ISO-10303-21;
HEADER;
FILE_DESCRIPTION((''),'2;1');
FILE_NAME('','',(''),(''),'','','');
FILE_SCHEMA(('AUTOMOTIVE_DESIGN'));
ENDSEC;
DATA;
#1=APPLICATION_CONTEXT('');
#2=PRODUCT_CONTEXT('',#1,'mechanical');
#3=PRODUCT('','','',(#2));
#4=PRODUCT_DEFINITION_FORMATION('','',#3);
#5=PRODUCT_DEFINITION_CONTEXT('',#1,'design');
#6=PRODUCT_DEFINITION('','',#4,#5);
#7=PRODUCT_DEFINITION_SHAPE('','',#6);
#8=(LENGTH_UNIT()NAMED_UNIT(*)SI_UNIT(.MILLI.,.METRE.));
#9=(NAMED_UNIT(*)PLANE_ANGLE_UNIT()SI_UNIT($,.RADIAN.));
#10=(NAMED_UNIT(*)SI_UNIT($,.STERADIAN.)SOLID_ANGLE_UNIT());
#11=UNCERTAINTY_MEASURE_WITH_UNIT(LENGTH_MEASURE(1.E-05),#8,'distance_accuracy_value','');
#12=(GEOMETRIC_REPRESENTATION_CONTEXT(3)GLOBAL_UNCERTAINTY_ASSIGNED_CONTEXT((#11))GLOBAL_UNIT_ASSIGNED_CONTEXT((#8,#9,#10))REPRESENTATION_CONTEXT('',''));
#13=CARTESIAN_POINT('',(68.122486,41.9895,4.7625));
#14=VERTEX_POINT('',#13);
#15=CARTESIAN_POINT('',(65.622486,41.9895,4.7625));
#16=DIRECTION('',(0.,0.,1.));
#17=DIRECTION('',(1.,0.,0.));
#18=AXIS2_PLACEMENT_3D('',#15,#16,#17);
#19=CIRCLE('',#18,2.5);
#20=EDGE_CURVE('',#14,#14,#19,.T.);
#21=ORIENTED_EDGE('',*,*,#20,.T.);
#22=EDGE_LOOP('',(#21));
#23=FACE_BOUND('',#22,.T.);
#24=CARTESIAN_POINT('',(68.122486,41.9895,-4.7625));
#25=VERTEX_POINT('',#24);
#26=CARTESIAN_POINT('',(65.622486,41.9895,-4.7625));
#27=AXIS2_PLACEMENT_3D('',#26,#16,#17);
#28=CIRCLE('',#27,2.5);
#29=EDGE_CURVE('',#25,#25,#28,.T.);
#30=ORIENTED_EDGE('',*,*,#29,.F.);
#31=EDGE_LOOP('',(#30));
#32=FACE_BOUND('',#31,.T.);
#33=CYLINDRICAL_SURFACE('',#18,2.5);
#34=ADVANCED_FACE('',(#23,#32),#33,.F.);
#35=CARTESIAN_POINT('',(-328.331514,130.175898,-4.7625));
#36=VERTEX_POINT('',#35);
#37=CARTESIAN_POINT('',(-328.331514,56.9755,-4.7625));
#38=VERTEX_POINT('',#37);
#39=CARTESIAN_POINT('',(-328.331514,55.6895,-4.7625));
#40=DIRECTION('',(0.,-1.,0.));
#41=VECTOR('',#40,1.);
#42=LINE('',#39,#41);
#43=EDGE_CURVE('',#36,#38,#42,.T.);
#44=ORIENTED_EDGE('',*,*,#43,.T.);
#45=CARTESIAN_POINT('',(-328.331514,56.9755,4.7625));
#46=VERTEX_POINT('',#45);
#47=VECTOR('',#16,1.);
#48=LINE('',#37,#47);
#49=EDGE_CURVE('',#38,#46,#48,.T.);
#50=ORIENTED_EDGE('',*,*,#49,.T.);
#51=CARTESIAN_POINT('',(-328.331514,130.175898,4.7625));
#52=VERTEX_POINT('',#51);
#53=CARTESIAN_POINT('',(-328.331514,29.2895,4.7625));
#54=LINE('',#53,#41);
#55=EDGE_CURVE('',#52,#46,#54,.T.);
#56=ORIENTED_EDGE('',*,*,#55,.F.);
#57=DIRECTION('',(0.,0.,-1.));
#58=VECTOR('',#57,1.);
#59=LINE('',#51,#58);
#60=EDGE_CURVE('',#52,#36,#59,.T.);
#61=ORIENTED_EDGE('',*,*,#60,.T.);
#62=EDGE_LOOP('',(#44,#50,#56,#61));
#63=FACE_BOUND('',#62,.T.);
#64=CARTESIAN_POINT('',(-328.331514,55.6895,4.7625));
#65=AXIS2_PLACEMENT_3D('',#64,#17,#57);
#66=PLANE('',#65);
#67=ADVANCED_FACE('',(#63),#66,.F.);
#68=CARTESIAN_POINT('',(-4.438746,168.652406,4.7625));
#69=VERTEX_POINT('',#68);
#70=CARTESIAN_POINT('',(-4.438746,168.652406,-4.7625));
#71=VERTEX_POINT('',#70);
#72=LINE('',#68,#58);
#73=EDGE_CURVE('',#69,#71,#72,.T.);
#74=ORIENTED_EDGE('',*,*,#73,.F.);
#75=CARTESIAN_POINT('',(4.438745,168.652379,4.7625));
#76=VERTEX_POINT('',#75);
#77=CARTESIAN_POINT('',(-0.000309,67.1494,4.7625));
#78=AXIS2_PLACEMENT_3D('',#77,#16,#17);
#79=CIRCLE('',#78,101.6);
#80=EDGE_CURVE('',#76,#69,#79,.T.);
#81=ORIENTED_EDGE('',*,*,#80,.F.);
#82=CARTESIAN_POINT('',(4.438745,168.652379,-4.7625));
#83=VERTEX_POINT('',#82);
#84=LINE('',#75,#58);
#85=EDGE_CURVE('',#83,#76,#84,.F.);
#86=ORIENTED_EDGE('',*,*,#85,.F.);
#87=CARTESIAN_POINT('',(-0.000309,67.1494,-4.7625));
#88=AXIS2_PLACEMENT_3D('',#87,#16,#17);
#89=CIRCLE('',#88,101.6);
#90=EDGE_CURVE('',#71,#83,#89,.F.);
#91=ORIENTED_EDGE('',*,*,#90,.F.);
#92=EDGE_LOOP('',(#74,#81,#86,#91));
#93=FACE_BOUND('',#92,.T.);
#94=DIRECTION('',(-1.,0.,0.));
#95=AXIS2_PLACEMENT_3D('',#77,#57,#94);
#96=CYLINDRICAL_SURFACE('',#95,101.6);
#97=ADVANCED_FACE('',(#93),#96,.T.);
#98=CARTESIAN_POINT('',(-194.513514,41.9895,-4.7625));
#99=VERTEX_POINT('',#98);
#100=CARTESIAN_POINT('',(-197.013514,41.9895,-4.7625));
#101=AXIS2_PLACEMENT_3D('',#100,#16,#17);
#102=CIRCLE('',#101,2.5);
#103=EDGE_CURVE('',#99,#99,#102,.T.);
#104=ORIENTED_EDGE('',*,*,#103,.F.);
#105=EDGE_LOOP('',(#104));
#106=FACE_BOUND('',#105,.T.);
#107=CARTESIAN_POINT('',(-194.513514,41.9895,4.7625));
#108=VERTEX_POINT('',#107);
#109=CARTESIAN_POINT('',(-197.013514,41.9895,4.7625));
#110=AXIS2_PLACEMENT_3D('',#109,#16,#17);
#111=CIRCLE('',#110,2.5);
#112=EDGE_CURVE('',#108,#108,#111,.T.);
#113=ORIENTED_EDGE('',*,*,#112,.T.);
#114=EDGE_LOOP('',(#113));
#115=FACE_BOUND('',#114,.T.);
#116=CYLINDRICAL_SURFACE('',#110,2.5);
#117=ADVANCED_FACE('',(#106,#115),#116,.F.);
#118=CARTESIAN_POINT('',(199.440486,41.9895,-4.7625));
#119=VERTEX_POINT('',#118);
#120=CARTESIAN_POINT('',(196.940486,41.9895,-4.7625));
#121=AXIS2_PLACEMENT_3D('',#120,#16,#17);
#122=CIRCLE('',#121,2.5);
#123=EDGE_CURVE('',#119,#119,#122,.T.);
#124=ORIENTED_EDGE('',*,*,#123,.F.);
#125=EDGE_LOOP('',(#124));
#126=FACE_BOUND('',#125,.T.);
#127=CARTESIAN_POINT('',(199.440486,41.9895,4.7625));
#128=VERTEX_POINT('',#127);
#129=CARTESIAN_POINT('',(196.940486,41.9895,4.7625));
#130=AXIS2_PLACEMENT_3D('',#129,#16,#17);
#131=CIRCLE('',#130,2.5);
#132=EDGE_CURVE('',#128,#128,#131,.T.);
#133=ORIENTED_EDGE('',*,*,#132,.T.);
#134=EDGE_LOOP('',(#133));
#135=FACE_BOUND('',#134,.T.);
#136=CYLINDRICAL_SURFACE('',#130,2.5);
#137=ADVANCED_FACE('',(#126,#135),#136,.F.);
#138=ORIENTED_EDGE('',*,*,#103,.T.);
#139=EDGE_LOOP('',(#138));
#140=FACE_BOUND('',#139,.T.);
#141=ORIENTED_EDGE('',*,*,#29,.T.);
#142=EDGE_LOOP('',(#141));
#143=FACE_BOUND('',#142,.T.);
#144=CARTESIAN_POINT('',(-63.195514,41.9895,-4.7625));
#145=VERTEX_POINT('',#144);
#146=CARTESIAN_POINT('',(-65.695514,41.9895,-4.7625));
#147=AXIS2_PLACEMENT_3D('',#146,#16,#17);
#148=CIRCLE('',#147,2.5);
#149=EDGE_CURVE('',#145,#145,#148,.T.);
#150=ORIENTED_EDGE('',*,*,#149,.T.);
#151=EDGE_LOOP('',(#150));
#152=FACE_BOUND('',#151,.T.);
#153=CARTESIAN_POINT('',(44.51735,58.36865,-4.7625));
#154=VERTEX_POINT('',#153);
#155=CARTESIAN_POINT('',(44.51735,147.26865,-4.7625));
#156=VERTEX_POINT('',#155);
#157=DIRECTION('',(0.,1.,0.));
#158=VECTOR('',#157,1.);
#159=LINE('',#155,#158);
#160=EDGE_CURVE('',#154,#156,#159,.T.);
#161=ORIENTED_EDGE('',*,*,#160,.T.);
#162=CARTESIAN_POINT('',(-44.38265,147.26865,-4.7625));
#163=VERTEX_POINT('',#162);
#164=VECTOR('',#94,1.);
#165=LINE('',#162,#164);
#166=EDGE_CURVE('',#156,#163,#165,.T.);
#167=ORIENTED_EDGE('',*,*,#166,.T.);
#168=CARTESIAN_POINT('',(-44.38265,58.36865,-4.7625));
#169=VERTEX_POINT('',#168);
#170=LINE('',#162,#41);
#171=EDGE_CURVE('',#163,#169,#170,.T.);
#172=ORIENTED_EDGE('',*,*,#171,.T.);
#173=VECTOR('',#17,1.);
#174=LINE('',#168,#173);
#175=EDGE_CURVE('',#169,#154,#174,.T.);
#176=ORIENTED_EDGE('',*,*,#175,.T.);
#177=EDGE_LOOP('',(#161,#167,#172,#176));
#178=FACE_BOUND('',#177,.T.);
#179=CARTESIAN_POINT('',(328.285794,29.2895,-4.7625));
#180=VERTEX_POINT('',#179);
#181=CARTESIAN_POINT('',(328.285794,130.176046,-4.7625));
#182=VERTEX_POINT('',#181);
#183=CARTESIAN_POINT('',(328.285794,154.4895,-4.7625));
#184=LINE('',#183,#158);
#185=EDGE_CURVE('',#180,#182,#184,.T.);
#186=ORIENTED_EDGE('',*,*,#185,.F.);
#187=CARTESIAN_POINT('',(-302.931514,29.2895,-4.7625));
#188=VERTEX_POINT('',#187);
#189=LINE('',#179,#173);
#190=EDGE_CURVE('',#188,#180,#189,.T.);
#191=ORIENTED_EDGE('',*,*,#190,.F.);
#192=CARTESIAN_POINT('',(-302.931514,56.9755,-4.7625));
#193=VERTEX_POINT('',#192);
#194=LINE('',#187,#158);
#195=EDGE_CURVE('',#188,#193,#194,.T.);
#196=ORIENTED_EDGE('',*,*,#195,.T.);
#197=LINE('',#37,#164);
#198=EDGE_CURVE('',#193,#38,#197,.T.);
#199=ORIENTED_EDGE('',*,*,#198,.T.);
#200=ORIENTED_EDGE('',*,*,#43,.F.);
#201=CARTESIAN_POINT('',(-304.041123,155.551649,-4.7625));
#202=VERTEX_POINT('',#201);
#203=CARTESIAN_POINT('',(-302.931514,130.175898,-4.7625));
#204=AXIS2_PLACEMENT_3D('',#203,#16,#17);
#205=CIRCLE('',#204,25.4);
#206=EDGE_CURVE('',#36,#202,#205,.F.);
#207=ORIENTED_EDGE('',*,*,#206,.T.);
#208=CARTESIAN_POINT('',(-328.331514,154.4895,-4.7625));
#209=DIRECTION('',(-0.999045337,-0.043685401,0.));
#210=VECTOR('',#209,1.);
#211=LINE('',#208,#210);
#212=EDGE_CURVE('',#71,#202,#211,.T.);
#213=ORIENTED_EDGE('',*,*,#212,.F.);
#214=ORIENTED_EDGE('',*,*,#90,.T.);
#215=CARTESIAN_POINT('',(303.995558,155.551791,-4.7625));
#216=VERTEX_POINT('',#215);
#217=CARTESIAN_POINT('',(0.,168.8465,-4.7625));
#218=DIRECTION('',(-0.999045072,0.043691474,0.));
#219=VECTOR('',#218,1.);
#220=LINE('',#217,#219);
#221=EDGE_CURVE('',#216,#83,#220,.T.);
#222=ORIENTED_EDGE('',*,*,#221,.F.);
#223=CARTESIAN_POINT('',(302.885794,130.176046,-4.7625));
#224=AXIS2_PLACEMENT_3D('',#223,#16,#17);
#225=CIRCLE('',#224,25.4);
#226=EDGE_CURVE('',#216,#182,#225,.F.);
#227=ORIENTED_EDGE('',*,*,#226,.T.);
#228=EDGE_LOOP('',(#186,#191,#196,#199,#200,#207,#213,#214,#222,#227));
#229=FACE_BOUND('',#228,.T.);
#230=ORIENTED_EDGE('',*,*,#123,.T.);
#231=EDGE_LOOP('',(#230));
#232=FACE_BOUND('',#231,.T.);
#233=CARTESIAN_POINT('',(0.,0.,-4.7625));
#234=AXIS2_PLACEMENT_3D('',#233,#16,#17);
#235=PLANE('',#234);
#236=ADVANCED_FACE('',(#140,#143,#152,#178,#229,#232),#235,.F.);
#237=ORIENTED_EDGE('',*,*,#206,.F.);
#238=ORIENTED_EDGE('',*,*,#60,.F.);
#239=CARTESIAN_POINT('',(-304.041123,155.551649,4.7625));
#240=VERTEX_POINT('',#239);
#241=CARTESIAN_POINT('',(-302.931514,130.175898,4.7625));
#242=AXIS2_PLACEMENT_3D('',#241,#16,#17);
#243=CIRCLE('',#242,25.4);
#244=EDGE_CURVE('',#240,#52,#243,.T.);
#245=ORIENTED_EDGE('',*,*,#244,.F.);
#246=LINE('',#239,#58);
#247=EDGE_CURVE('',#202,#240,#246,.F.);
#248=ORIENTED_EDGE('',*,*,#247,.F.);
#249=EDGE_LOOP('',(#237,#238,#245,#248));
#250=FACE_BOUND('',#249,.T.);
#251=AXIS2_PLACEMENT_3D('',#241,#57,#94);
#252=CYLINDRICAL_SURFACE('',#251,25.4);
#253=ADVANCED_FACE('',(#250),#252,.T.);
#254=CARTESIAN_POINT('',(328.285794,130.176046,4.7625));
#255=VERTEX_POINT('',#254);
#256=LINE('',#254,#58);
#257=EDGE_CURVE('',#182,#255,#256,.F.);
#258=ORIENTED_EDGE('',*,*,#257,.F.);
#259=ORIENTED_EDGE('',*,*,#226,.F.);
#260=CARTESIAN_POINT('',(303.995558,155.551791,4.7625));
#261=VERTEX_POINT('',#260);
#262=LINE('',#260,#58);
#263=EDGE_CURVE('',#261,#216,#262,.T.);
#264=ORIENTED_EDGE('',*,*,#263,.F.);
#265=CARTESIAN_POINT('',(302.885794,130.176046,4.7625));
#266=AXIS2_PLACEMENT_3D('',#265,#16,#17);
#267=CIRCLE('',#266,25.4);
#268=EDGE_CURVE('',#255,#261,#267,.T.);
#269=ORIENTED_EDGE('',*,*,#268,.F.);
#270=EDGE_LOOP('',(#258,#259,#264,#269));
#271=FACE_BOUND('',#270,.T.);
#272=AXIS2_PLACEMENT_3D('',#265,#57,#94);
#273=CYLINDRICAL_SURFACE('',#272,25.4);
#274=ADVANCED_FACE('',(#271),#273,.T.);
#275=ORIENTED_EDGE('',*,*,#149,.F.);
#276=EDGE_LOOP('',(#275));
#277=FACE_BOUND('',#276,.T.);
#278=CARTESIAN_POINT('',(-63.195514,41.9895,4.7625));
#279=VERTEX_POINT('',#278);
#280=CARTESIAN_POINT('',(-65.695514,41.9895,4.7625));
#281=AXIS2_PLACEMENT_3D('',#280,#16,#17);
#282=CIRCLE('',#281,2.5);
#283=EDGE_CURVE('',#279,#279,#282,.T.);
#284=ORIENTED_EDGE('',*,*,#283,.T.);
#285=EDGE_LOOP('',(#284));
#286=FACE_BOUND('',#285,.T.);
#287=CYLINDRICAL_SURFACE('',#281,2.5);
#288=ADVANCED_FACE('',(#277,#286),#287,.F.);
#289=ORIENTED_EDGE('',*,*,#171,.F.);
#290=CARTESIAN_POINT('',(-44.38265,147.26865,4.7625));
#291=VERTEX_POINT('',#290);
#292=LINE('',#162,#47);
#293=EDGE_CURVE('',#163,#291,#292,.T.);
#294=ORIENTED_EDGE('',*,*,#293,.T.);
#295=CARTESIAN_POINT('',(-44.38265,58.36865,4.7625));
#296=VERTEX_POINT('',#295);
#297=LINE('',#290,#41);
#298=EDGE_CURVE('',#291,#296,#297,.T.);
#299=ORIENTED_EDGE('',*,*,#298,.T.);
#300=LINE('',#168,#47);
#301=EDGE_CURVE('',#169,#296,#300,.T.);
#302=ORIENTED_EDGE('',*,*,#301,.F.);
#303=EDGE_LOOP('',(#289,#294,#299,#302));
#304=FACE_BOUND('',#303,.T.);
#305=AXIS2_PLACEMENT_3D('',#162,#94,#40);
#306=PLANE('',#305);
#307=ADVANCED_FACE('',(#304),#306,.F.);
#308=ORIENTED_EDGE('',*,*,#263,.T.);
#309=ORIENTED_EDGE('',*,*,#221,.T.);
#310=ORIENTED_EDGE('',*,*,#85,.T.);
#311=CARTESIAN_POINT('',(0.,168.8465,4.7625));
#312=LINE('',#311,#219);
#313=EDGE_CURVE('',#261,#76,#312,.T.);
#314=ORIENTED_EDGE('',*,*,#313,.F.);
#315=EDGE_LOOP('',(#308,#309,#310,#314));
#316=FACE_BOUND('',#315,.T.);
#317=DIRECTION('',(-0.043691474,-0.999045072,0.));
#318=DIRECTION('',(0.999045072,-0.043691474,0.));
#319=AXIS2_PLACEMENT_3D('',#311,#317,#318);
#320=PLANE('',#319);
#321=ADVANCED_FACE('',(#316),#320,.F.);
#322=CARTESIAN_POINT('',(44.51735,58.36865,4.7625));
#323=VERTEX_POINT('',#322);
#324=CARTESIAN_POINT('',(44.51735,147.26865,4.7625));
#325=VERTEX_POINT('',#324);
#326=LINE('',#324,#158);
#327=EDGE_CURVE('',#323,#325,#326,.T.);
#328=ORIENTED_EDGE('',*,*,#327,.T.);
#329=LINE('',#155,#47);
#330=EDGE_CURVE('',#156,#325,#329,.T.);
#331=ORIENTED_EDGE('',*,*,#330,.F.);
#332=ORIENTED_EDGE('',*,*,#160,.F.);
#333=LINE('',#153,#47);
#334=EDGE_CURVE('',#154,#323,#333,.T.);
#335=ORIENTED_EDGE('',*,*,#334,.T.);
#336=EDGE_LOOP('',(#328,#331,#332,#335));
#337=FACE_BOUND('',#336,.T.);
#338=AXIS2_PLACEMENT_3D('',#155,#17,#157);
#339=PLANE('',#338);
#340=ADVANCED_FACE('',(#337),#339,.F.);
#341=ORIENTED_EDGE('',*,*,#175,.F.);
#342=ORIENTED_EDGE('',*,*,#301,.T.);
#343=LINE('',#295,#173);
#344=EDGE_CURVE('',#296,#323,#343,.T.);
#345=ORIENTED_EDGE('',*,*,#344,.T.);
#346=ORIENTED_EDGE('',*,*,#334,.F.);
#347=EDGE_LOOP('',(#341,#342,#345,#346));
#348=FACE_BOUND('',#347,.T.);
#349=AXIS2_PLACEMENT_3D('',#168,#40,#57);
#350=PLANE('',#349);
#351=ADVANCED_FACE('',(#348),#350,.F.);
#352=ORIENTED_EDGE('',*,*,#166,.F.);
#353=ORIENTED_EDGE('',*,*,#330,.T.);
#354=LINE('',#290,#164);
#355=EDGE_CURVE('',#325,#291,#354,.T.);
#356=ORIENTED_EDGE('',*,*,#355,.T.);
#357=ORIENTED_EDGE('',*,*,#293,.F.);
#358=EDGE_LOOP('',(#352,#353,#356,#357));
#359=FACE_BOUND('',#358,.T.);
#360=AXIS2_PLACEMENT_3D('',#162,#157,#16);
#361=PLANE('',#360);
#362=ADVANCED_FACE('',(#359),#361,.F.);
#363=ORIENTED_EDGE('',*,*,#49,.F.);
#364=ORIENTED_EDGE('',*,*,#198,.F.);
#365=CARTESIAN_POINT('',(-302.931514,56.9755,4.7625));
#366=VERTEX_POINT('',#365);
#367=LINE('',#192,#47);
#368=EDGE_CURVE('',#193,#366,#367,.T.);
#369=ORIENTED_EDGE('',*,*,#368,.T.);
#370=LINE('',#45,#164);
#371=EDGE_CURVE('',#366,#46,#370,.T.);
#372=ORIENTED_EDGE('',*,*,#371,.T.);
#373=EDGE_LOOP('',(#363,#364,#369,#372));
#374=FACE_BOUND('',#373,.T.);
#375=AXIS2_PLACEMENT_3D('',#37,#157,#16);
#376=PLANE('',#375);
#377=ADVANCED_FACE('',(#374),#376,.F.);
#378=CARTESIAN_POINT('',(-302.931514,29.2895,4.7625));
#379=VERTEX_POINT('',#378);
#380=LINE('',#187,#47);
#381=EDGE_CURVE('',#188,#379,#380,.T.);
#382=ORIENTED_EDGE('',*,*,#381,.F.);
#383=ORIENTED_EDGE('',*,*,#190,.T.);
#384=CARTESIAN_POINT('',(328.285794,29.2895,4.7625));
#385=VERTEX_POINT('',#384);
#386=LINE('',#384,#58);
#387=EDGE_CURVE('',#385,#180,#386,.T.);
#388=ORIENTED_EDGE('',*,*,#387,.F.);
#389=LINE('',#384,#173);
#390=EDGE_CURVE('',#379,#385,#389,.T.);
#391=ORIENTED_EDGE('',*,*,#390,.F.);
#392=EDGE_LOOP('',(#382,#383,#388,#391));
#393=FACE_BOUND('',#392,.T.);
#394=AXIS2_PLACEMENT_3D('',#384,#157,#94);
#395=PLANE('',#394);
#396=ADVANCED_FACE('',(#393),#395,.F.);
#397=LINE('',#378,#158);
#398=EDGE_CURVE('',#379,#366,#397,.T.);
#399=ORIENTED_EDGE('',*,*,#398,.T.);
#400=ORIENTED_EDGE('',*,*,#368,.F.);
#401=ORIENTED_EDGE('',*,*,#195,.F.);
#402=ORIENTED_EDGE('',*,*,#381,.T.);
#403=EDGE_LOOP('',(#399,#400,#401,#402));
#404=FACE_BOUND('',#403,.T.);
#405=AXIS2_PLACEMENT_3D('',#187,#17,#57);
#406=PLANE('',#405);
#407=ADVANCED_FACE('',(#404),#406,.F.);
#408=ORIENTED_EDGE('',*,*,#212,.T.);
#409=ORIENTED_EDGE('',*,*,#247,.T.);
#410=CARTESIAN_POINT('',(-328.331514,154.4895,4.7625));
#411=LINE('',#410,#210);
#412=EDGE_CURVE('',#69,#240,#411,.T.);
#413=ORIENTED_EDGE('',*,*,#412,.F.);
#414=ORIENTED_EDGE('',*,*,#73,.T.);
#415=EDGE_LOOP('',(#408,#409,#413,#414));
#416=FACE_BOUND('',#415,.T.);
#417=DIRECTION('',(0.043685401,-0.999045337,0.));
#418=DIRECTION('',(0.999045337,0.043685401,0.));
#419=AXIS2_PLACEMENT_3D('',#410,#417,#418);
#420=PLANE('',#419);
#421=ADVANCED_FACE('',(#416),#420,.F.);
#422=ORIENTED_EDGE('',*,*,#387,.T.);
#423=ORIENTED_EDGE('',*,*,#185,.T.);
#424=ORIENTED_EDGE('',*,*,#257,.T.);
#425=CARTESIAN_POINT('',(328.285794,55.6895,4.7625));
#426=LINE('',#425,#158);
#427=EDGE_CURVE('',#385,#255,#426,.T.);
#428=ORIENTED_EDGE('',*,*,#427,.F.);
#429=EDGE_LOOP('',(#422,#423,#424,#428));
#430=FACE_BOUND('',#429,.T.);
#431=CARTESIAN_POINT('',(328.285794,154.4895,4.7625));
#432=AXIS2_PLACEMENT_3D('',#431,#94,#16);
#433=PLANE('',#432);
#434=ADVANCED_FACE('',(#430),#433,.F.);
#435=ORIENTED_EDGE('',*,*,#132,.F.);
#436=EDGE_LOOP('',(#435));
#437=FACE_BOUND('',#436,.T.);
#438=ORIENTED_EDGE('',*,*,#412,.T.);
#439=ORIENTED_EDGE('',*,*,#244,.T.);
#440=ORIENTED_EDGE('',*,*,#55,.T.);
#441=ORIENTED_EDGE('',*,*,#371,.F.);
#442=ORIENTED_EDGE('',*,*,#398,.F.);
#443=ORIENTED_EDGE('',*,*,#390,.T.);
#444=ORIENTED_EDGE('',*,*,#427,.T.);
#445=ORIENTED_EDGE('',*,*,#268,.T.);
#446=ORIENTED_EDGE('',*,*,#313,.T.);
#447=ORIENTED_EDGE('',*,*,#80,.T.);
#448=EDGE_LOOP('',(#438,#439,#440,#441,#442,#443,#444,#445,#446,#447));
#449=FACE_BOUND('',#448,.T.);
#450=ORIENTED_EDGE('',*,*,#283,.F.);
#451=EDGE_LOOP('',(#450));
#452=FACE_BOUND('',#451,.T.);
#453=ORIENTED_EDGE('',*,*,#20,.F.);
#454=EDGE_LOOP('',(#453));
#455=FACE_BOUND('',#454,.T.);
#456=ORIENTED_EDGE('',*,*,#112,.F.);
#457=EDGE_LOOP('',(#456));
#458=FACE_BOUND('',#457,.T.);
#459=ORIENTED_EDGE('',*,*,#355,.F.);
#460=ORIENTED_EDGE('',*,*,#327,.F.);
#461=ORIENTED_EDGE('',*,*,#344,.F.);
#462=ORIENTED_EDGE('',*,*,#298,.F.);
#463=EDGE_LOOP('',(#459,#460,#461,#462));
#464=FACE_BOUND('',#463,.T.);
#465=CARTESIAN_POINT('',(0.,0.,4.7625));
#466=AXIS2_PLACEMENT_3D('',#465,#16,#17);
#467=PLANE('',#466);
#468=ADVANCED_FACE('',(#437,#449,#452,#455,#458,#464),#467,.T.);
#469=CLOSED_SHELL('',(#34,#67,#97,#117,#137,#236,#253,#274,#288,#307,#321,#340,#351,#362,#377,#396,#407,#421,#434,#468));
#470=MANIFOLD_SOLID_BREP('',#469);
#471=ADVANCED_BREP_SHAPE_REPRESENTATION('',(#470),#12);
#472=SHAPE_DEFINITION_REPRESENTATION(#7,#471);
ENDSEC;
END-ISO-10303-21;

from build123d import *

# Parameters (mm, degrees)
BOSS_EXTRUDE1_DEPTH         = 4.7625
FILLET1_R                   = 25.4
FILLET2_R                   = 101.6
SKETCH3_W                   = 25.4
SKETCH3_H                   = 27.686
CUT_EXTRUDE1_DEPTH          = 370.281286979
SKETCH5_W                   = 88.9
SKETCH5_H                   = 88.9
CUT_EXTRUDE2_DEPTH          = 370.281286979
TAP_DRILL_FOR_M6X1_0_TAP1_D = 5


with BuildPart() as part:
    # Sketch2 → Boss-Extrude1 (new, symmetric)
    with BuildSketch(Plane.XY):
        Polygon((-328.331514278, 55.6895), (-328.331514278, 154.489500012), (0, 168.8465), (328.285794278, 154.489500012), (328.285794278, 55.6895), (328.285794278, 29.289499968), (-328.331514278, 29.289499968), align=None)
    extrude(amount=BOSS_EXTRUDE1_DEPTH, both=True)

    # Fillet1
    fillet1_edges = [part.edges().sort_by_distance(p)[0] for p in [
        (-328.331514278, 154.489500012, 0),
        (328.285794278, 154.489500012, 0),
    ]]
    fillet(fillet1_edges, radius=FILLET1_R)

    # Fillet2
    # the kernel refuses this fillet: 101.6 mm, written as the material it takes off along each edge
    with BuildSketch(Plane(origin=(0, 168.8465, 15.869968436), x_dir=(-0.9990453371749675, -0.04368540109642698, 0), z_dir=(0, 0, -1))) as fillet2_piece_1:
        with BuildLine():
            CenterArc((FILLET2_R * 0.0437301906922, -FILLET2_R), FILLET2_R, 90, 5.00792009)
            Line((-FILLET2_R * 0.0435632568505, -FILLET2_R * 0.00381735910722), (0, 0))
            Line((0, 0), (FILLET2_R * 0.0437301906922, 0))
        make_face()
    extrude(amount=31.739936872, mode=Mode.SUBTRACT)

    # Sketch3 → Cut-Extrude1 (cut, through all)
    with BuildSketch(Plane.XY.offset(4.7625)):
        with Locations((-315.631514278, 43.132499968)):
            Rectangle(SKETCH3_W, SKETCH3_H)
    extrude(amount=-CUT_EXTRUDE1_DEPTH, mode=Mode.SUBTRACT)

    # Sketch5 → Cut-Extrude2 (cut, through all)
    with BuildSketch(Plane.XY.offset(4.7625)):
        with Locations((0.067349574, 102.81865045)):
            Rectangle(SKETCH5_W, SKETCH5_H)
    extrude(amount=-CUT_EXTRUDE2_DEPTH, mode=Mode.SUBTRACT)

    # Tap Drill for M6x1.0 Tap1 (through all)
    with Locations(Plane.XY.offset(4.7625)):
        with Locations((-197.013514278, 41.989499968), (-65.695514278, 41.989499968), (65.622485722, 41.989499968), (196.940485722, 41.989499968)):
            Hole(TAP_DRILL_FOR_M6X1_0_TAP1_D / 2)


solid = part.part
